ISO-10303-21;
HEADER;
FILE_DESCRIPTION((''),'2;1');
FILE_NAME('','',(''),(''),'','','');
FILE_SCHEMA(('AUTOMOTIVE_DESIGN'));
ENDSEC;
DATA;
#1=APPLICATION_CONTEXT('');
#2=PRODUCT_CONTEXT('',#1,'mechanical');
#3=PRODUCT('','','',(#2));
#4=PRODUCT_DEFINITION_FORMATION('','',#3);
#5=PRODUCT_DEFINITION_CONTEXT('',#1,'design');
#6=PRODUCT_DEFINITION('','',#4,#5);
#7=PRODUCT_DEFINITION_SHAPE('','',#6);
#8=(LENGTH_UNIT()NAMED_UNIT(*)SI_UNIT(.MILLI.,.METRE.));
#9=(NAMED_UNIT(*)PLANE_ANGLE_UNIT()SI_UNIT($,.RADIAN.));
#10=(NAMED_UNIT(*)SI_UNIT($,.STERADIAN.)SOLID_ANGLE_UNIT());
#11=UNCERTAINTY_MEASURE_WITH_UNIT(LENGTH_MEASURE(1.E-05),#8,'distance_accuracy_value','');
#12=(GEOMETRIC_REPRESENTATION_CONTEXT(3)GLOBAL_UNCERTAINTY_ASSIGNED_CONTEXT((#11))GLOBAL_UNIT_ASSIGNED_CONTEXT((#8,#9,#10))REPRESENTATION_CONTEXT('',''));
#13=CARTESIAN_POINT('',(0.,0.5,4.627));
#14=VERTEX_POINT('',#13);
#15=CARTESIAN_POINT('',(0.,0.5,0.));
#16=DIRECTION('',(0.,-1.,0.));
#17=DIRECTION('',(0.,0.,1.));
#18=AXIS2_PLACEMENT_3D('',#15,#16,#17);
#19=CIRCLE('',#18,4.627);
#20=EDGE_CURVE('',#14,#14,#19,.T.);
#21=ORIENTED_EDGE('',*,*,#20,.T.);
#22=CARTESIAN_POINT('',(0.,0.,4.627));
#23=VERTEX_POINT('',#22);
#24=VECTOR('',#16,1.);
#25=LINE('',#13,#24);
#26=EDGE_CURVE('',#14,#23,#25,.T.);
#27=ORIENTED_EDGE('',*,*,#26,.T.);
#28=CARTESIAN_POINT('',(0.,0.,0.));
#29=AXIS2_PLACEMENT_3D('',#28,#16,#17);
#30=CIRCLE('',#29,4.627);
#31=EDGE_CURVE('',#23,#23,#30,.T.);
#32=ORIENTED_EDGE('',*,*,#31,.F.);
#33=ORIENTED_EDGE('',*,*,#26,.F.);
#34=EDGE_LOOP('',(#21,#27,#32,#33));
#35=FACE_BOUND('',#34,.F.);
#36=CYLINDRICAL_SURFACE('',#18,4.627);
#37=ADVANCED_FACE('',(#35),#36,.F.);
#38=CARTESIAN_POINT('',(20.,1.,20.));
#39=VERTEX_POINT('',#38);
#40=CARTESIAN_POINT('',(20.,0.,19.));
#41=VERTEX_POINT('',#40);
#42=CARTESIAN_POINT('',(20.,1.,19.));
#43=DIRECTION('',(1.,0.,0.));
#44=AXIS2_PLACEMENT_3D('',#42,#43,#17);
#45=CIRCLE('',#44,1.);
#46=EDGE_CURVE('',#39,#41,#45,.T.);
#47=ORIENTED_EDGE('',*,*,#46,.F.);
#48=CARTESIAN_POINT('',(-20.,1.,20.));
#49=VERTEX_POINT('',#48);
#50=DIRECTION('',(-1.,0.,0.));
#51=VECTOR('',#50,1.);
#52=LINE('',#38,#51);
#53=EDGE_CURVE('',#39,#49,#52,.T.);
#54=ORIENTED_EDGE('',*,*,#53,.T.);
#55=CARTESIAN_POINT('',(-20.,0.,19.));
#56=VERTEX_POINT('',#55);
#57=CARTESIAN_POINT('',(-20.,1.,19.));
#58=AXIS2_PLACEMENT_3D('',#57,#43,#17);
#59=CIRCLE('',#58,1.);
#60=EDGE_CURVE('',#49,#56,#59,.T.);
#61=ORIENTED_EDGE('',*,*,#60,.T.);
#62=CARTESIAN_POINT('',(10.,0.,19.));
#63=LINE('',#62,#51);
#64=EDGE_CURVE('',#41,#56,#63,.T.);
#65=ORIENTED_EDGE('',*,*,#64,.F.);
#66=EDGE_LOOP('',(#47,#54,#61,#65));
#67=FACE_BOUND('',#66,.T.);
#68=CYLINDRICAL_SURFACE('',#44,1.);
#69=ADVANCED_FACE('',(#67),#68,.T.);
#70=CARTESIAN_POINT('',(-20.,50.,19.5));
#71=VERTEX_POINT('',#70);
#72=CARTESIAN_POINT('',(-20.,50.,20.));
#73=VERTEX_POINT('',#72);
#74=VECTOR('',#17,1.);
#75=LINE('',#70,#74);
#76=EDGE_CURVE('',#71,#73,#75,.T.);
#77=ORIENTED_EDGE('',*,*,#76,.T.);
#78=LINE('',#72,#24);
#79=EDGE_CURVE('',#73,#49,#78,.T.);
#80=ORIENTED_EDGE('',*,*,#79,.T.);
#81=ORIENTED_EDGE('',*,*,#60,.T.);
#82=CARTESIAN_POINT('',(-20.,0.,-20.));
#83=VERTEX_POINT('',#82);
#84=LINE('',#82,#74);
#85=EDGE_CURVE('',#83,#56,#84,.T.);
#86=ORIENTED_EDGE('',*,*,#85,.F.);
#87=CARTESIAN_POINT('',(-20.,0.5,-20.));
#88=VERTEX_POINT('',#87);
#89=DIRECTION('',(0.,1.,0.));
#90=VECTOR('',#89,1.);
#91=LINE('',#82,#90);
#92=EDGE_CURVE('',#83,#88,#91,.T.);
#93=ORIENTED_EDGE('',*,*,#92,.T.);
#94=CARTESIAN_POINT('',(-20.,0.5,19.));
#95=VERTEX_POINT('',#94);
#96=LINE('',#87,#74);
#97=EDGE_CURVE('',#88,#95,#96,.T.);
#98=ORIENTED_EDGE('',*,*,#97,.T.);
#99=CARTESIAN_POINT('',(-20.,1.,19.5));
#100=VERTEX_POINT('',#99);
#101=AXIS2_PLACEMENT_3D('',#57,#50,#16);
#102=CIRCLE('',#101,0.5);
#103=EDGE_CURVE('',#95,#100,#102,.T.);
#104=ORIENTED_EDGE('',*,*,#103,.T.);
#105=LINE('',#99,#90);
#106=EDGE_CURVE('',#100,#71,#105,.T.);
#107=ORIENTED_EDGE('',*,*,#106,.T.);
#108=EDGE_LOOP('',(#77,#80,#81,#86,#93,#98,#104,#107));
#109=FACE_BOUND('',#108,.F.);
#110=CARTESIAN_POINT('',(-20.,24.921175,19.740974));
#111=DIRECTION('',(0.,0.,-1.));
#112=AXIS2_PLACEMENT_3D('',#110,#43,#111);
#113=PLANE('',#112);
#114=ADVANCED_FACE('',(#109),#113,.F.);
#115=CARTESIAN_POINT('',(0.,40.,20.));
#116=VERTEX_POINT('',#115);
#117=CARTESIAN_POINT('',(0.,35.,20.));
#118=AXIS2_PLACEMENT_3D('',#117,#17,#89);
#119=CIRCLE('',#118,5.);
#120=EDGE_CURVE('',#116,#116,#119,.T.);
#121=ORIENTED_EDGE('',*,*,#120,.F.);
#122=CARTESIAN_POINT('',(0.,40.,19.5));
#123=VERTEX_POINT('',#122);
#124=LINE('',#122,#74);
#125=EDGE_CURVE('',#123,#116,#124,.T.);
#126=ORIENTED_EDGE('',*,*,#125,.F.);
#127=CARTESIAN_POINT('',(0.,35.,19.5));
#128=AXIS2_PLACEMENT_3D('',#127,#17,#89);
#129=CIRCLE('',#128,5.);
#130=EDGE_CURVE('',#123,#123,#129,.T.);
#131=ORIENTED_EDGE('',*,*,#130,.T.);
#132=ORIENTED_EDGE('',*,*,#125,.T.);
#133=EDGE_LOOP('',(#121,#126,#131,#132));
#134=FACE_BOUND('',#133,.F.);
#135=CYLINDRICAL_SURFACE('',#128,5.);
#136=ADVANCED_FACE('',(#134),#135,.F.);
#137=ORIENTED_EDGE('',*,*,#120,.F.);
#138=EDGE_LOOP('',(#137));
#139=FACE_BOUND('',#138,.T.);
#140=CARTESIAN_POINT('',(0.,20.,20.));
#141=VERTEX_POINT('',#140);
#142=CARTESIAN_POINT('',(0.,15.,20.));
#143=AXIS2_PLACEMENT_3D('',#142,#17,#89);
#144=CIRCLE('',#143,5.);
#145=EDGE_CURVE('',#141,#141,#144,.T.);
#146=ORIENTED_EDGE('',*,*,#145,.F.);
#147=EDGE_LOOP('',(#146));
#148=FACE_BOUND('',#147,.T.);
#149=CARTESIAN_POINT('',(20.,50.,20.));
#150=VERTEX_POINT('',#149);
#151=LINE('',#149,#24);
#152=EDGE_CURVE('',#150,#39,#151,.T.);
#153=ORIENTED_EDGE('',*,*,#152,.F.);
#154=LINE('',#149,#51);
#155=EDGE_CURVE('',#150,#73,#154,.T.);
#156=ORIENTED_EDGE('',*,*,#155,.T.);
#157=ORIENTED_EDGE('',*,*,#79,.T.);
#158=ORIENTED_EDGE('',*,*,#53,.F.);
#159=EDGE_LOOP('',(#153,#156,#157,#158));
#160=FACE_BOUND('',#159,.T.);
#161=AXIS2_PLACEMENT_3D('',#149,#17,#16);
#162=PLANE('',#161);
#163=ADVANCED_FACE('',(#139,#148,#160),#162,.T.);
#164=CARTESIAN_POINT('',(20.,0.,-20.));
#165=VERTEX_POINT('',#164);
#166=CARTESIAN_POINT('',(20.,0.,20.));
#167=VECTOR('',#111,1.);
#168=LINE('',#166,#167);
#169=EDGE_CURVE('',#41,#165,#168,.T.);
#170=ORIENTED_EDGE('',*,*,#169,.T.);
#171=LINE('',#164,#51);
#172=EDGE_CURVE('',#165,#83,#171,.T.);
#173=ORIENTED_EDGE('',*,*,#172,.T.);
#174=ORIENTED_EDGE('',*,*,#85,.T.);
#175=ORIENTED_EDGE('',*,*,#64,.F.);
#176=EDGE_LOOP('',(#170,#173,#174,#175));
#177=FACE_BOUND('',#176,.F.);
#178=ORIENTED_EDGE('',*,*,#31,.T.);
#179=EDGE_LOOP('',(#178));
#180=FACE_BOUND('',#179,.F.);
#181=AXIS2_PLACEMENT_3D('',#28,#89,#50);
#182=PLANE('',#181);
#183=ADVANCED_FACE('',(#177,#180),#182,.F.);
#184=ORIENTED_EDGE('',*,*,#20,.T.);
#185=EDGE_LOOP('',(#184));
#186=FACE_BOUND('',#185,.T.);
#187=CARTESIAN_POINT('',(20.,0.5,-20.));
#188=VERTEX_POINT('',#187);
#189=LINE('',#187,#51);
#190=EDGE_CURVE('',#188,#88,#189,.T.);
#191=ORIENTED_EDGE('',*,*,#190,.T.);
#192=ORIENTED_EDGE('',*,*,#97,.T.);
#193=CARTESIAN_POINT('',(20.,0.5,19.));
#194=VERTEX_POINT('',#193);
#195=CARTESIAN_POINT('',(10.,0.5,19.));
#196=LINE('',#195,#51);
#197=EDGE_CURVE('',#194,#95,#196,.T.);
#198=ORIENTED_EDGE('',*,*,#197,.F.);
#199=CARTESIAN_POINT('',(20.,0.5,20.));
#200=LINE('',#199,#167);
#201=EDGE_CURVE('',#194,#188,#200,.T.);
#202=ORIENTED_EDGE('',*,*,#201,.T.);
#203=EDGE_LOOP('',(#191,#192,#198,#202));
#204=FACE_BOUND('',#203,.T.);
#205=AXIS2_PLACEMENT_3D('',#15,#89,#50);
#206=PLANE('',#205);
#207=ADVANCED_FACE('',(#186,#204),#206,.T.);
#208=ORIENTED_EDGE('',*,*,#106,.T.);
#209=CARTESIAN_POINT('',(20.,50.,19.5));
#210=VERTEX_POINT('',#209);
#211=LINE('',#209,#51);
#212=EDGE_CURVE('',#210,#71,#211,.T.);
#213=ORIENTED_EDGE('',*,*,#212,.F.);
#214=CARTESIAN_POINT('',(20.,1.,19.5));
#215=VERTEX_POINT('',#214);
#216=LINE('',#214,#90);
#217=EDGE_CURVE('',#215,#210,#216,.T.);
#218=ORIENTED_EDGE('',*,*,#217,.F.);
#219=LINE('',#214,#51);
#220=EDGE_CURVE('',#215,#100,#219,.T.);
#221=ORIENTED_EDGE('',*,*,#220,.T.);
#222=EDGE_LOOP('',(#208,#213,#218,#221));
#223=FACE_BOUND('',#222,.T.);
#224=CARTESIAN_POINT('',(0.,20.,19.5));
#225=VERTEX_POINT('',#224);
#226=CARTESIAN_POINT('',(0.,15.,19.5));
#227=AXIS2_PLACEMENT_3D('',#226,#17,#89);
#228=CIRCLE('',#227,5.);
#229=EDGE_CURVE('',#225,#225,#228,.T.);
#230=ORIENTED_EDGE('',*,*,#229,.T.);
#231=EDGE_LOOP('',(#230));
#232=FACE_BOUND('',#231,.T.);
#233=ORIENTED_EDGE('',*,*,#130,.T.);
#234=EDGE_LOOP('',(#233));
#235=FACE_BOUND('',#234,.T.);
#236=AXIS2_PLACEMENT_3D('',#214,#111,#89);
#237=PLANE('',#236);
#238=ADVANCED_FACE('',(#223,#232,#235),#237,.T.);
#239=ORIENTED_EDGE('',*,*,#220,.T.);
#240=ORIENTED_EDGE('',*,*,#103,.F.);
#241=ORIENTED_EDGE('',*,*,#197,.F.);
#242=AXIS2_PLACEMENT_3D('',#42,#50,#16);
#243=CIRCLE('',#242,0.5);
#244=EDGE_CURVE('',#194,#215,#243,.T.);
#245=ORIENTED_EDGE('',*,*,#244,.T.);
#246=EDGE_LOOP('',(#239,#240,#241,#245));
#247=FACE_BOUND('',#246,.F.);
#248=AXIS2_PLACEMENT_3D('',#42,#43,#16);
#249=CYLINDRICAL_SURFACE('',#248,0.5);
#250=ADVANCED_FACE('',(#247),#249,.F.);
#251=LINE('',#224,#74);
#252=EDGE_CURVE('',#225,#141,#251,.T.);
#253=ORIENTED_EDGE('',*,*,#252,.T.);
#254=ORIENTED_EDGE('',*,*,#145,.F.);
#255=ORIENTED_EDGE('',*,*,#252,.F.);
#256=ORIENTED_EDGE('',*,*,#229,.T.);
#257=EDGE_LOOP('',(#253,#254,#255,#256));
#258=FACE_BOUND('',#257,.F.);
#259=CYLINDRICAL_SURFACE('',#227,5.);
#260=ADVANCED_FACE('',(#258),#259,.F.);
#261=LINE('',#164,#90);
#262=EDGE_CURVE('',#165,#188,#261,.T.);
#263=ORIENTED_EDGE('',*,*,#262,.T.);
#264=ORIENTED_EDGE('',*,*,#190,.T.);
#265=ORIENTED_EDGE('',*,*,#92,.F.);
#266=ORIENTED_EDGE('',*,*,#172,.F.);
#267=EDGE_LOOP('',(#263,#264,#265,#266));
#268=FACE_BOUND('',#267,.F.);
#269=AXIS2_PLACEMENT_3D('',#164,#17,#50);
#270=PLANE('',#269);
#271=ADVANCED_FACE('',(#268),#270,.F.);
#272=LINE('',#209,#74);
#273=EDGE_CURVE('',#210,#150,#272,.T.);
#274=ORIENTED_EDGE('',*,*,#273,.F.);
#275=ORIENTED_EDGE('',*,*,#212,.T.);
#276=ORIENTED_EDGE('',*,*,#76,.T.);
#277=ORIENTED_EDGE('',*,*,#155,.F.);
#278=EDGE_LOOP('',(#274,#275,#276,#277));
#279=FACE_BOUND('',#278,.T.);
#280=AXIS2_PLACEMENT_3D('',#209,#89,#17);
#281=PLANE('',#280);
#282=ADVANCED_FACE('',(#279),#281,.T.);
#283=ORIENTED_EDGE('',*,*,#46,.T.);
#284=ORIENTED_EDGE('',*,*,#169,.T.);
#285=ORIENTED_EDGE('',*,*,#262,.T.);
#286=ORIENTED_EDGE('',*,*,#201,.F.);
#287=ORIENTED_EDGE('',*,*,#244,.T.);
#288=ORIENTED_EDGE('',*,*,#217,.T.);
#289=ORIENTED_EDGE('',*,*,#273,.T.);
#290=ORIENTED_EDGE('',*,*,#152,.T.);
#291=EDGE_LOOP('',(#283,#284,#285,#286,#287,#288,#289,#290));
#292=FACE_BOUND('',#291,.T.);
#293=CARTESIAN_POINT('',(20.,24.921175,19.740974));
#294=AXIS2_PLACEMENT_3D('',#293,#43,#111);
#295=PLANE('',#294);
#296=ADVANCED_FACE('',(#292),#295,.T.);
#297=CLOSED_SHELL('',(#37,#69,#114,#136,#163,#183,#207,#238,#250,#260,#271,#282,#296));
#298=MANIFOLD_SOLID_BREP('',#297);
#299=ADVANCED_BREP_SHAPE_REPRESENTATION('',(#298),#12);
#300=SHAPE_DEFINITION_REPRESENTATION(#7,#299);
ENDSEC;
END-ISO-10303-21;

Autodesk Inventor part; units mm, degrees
ref_plane "YZ Plane" through (0, 0, 0) normal (1, 0, 0) x (0, 1, 0)
ref_plane "XZ Plane" through (0, 0, 0) normal (0, 1, 0) x (-1, 0, 0)
ref_plane "XY Plane" through (0, 0, 0) normal (0, 0, 1) x (1, 0, 0)
sketch "Sketch1" plane through (0, 0, 0) normal (0, 1, 0) x (-1, 0, 0)
  line L0 (-20, -20) -> (20, -20)
  line L1 (20, -20) -> (20, 20)
  line L2 (20, 20) -> (-20, 20)
  line L3 (-20, 20) -> (-20, -20)
  line L4 (-20, -20) -> (20, 20) construction
  line L5 (20, -20) -> (-20, 20) construction
  point P0 (0, 0)
  dimension "d0" = 40
  dimension "d1" = 40
extrude "Plate1" add sketch "Sketch1" along normal blind 0.5
sketch "Sketch2" plane through (20, 0, 19.5) normal (0, 0, 1) x (1, 0, 0)
  line L0 (-40, 0) -> (0, 0)
  line L1 (0, 0) -> (0, 50)
  line L2 (0, 50) -> (-40, 50)
  line L3 (-40, 50) -> (-40, 0)
edge flange "Flange1" height 50 angle 90 thickness 0.5 bend radius 0.5 thickness toward (0, 0, 1) relief tear relief width 0.5 relief depth 0.25 edges at (0, 0.5, 20) wall of the first edge with corners at (-20, 0, 19.5) (20, 0, 19.5) (20, 50, 19.5) (-20, 50, 19.5)
bend "Bend1"
corner "Corner1"
sketch "Sketch3" plane through (20, 50, 19.5) normal (0, 0, -1) x (-1, 0, 0)
  line L0 (40, 0) -> (0, 0) construction
  line L1 (20, 0) -> (20, -49) construction
  line L2 (0, -49) -> (40, -49) construction
  line L3 (0, 0) -> (0, -20) construction
  line L4 (0, 0) -> (0, -49) construction
  line L5 (0, -20) -> (0, -40) construction
  line L6 (40, 0) -> (40, -49) construction
  line L7 (0, 0) -> (1.6205, 0)
  line L8 (0, 0) -> (0, -15) construction
  line L9 (0, -15) -> (20, -15) construction
  circle A0 centre (20, -15) radius 5 construction
  line L10 (0, -15) -> (0, -35) construction
  line L11 (0, -35) -> (20, -35) construction
  circle A1 centre (20, -35) radius 5 construction
  point P0 (20, -50)
  dimension "d15" = 15
  dimension "d16" = 20
hole "Hole1" at (0, 35, 19.5) at (0, 15, 19.5) direction (0, 0, 1) diameter 10 end through all
sketch "Sketch4" plane through (0, 0.5, 0) normal (0, 1, 0) x (1, 0, 0)
  point P0 (0, 0)
hole "Hole2" at (0, 0.5, 0) direction (0, -1, 0) diameter 9.254 end through all
equation "\"d22\" = Thickness"
equation "\"d29\" = Thickness"
equation "\"d3\" = BendReliefWidth"
equation "\"d4\" = BendReliefDepth"
equation "\"d5\" = MinimumRemnant"
equation "\"d6\" = BendRadius"
equation "\"d9\" = BendRadius"
equation "\"d10\" = CornerReliefSize"
equation "\"d11\" = GapSize"
equation "\"d12\" = JacobiRadiusSize"
equation "\"BendRadius\" = Thickness"
equation "\"BendReliefWidth\" = Thickness"
equation "\"BendReliefDepth\" = 0.5 * Thickness"
equation "\"CornerReliefSize\" = 4 * Thickness"
equation "\"MinimumRemnant\" = 2 * Thickness"
equation "\"TransitionRadius\" = BendRadius"
equation "\"JacobiRadiusSize\" = BendRadius"
equation "\"GapSize\" = Thickness"
equation "\"d2\" = BendRadius"
equation "\"Thickness\" = 0.5"
properties part number "L Braket for Wheels"
